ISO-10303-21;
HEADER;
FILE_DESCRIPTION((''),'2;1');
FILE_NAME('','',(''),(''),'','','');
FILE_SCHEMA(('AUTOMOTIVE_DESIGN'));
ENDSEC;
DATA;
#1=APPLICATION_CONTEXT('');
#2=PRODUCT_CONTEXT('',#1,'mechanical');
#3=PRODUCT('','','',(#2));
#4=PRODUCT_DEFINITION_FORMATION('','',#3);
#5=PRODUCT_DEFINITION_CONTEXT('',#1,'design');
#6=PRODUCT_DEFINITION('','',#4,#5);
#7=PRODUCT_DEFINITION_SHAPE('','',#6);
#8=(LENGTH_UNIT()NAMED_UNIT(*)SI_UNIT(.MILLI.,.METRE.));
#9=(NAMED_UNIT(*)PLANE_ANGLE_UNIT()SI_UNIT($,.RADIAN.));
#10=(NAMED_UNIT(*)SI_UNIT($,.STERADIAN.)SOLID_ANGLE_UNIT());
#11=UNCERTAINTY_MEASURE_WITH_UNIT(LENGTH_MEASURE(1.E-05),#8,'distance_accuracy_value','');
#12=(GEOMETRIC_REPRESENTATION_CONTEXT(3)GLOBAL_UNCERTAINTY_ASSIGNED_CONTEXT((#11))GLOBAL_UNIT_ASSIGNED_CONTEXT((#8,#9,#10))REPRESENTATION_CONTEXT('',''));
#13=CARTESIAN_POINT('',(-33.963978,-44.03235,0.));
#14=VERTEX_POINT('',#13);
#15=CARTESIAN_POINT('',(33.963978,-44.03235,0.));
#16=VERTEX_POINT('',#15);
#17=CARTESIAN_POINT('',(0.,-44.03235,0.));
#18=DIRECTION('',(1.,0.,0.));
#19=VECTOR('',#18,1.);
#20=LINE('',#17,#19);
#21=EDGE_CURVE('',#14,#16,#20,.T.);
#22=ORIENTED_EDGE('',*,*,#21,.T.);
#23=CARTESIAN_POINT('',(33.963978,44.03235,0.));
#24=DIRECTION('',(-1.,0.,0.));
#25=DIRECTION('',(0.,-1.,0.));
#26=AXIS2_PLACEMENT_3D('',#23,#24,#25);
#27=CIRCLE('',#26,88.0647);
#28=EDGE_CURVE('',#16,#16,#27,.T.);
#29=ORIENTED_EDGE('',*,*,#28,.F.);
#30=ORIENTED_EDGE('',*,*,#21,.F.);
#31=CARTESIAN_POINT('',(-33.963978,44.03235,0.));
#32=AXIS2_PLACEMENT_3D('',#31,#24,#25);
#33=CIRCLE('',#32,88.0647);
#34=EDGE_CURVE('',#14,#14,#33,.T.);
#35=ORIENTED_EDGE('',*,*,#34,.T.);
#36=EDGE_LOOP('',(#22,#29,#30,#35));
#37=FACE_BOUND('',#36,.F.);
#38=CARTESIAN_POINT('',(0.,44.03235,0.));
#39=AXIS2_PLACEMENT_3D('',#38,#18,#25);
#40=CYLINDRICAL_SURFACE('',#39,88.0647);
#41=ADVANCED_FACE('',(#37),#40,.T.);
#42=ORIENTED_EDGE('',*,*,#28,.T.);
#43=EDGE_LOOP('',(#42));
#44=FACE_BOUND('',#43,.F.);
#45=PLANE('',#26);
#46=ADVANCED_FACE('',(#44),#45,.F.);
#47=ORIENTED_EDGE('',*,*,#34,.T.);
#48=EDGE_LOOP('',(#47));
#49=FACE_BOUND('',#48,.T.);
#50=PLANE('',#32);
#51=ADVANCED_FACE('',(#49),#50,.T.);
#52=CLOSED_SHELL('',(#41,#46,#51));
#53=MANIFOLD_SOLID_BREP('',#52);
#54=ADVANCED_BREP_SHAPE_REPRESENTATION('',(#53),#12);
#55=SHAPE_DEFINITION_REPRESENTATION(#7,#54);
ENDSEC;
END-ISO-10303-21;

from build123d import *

# Parameters (mm, degrees)
F0_W = 67.9279565811
F0_H = 88.0647003651


# Not quite as in the source:
# - a feature of the source that left no trace in its solid (it failed there, or was rolled back) is left out


with BuildPart() as f1:
    # F0 (on Top) → F1 (revolve)
    with BuildSketch(Plane.XY):
        Rectangle(F0_W, F0_H)
    revolve(axis=Axis((0, 44.0323501825, 0), (-1, 0, 0)))


solid = f1.part
